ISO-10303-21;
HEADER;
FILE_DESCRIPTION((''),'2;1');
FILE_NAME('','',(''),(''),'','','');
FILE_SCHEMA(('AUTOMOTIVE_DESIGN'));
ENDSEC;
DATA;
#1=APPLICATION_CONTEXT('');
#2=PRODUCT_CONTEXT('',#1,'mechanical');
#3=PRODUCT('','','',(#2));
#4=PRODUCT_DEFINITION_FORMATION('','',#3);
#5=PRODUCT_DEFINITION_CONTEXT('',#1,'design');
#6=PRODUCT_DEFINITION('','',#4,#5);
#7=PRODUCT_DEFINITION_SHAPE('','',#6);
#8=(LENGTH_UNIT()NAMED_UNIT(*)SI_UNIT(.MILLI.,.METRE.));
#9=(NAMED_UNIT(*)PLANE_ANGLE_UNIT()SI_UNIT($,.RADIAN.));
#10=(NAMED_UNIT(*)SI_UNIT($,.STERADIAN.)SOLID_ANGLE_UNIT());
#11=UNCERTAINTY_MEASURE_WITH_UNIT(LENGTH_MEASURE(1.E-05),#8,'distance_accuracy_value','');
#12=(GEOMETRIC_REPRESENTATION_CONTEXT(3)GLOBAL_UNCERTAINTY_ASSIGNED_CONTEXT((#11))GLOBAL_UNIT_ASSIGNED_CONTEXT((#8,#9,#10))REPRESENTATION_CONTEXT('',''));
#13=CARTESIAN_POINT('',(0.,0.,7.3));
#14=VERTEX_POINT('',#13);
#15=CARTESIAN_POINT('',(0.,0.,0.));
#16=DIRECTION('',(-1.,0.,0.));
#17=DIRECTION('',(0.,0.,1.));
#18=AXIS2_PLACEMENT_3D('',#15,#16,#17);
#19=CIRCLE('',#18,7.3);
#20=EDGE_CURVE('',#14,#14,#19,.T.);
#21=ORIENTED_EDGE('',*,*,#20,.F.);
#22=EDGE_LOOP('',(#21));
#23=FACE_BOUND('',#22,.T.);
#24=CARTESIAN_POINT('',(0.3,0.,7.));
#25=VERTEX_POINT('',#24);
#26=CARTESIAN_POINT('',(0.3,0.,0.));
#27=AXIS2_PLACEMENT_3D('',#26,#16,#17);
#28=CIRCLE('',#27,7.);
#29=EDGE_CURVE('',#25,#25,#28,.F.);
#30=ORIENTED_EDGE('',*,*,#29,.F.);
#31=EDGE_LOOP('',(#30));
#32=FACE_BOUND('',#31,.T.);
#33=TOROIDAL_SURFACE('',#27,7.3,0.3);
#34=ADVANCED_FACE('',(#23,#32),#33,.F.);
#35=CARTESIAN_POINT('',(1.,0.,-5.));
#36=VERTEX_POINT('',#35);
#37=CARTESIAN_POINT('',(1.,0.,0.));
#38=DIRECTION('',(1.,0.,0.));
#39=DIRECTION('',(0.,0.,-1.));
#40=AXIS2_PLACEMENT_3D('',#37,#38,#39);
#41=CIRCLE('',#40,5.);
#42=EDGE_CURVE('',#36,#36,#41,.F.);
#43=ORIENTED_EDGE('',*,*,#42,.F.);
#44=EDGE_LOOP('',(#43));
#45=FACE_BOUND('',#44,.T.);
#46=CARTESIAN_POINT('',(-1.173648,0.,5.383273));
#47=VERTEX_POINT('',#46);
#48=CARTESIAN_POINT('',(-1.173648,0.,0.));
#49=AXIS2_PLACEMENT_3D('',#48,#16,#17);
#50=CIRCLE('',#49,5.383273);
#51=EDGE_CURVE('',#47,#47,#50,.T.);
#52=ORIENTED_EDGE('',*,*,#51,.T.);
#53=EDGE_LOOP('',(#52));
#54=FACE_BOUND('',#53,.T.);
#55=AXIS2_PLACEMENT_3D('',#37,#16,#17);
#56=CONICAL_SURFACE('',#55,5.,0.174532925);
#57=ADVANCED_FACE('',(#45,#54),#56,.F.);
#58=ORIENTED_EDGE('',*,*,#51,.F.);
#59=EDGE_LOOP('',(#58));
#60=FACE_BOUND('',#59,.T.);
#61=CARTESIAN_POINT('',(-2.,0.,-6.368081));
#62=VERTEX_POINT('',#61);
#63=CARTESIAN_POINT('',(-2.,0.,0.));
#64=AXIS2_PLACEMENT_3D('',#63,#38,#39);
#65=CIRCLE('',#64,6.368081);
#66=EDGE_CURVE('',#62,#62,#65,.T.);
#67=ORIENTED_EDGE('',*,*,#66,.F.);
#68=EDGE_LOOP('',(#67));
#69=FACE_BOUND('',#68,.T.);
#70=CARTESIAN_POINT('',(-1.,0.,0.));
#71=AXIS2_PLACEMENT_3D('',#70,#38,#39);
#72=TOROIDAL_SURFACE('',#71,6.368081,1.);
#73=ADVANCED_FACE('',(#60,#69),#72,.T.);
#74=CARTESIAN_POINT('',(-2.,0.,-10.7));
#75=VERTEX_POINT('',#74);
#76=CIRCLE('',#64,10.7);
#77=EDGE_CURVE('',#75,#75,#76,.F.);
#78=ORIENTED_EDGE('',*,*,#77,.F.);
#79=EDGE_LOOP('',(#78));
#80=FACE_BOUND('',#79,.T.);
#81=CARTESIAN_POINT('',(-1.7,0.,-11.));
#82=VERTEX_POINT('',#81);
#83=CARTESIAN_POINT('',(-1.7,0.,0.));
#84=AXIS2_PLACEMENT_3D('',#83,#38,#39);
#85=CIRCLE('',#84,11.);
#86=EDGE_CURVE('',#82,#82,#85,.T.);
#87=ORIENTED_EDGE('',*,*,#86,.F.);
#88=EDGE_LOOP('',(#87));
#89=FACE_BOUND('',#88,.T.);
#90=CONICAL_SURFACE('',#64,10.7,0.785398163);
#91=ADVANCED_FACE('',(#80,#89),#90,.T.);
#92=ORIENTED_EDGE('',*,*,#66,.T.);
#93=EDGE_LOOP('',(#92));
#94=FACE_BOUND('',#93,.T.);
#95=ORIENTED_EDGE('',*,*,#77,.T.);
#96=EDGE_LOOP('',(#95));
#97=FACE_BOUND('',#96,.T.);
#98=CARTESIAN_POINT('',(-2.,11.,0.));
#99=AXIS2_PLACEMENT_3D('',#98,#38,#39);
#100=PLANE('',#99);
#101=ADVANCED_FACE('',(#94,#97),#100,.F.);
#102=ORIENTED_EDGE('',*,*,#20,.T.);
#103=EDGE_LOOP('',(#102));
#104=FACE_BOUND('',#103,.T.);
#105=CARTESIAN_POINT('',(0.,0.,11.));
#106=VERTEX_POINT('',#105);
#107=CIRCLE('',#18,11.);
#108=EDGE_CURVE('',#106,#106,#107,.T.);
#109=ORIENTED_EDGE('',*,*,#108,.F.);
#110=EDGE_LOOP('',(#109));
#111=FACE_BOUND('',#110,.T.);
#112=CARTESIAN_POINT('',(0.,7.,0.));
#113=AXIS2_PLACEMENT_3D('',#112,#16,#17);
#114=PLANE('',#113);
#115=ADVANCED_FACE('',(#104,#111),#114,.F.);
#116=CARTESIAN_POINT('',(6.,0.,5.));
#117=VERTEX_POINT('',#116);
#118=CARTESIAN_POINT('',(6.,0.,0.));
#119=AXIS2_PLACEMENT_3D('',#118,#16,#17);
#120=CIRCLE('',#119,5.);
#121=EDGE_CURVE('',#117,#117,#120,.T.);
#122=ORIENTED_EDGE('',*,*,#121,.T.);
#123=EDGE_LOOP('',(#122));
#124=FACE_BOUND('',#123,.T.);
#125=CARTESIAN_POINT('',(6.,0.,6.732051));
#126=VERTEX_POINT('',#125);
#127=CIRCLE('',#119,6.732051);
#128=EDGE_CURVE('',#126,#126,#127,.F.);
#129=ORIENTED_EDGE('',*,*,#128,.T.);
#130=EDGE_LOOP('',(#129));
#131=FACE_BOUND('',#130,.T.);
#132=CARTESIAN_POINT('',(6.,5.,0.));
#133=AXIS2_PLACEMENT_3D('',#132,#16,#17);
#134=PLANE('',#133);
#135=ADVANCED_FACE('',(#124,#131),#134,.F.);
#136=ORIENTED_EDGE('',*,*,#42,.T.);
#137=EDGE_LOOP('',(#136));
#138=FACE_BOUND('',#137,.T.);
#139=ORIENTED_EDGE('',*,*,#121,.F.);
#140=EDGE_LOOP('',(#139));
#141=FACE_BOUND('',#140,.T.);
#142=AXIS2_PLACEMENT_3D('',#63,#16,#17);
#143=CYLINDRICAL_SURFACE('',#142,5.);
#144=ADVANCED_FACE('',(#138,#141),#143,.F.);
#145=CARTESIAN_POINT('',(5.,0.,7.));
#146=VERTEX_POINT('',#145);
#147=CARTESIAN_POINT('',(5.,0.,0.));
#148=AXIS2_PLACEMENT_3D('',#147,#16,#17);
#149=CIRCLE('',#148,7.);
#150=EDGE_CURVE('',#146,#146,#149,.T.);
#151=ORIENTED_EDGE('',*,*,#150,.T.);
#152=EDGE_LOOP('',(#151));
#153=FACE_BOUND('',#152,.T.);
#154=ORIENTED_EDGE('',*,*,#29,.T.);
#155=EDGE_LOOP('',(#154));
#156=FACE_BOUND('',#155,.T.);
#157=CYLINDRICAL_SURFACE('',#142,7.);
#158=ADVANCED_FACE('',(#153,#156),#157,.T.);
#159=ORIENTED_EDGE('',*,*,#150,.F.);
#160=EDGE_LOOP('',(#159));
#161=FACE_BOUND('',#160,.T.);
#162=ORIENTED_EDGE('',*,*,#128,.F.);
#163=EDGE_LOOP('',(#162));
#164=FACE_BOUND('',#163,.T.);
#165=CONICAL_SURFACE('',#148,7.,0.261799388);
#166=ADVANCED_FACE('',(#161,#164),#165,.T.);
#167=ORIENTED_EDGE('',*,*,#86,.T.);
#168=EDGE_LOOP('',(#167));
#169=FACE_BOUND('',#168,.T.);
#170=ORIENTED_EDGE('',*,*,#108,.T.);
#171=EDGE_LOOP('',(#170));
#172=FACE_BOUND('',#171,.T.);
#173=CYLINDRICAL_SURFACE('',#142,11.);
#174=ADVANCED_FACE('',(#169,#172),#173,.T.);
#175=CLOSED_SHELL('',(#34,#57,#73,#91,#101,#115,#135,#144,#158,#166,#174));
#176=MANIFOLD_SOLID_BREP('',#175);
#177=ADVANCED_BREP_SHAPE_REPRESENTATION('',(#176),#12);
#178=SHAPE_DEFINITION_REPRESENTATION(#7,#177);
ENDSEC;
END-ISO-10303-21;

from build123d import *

# Parameters (mm, degrees)
CHAMFER1_SIZE  = 0.3
FILLET1_R      = 0.3
CHAMFER2_SIZE  = 3
CHAMFER2_SIZE2 = 0.528980942
CHAMFER3_SIZE  = 1
CHAMFER3_SIZE2 = 0.267949192
FILLET2_R      = 1


with BuildPart() as part:
    # Sketch1 → Revolve1 (revolve)
    with BuildSketch(Plane.XY):
        Polygon((-2, 5), (6, 5), (6, 7), (0, 7), (0, 11), (-2, 11), align=None)
    revolve(axis=Axis((-2, 0, 0), (1, 0, 0)))

    # Chamfer1
    chamfer1_edges = [part.edges().sort_by_distance(p)[0] for p in [
        (-2, -11, 0),
    ]]
    chamfer(chamfer1_edges, length=CHAMFER1_SIZE)

    # Fillet1
    fillet1_edges = [part.edges().sort_by_distance(p)[0] for p in [
        (0, -7, 0),
    ]]
    fillet(fillet1_edges, radius=FILLET1_R)

    # Chamfer2
    chamfer2_edges = [part.edges().sort_by_distance(p)[0] for p in [
        (-2, -5, 0),
    ]]
    chamfer2_side = [part.faces().sort_by_distance(p)[0] for p in [
        (2, -5, 0),
    ]]
    chamfer(chamfer2_edges, length=CHAMFER2_SIZE, length2=CHAMFER2_SIZE2, reference=chamfer2_side[0])

    # Chamfer3
    chamfer3_edges = [part.edges().sort_by_distance(p)[0] for p in [
        (6, -7, 0),
    ]]
    chamfer3_side = [part.faces().sort_by_distance(p)[0] for p in [
        (3.15, -7, 0),
    ]]
    chamfer(chamfer3_edges, length=CHAMFER3_SIZE, length2=CHAMFER3_SIZE2, reference=chamfer3_side[0])

    # Fillet2
    fillet2_edges = [part.edges().sort_by_distance(p)[0] for p in [
        (-2, -5.528980942, 0),
    ]]
    fillet(fillet2_edges, radius=FILLET2_R)


solid = part.part
